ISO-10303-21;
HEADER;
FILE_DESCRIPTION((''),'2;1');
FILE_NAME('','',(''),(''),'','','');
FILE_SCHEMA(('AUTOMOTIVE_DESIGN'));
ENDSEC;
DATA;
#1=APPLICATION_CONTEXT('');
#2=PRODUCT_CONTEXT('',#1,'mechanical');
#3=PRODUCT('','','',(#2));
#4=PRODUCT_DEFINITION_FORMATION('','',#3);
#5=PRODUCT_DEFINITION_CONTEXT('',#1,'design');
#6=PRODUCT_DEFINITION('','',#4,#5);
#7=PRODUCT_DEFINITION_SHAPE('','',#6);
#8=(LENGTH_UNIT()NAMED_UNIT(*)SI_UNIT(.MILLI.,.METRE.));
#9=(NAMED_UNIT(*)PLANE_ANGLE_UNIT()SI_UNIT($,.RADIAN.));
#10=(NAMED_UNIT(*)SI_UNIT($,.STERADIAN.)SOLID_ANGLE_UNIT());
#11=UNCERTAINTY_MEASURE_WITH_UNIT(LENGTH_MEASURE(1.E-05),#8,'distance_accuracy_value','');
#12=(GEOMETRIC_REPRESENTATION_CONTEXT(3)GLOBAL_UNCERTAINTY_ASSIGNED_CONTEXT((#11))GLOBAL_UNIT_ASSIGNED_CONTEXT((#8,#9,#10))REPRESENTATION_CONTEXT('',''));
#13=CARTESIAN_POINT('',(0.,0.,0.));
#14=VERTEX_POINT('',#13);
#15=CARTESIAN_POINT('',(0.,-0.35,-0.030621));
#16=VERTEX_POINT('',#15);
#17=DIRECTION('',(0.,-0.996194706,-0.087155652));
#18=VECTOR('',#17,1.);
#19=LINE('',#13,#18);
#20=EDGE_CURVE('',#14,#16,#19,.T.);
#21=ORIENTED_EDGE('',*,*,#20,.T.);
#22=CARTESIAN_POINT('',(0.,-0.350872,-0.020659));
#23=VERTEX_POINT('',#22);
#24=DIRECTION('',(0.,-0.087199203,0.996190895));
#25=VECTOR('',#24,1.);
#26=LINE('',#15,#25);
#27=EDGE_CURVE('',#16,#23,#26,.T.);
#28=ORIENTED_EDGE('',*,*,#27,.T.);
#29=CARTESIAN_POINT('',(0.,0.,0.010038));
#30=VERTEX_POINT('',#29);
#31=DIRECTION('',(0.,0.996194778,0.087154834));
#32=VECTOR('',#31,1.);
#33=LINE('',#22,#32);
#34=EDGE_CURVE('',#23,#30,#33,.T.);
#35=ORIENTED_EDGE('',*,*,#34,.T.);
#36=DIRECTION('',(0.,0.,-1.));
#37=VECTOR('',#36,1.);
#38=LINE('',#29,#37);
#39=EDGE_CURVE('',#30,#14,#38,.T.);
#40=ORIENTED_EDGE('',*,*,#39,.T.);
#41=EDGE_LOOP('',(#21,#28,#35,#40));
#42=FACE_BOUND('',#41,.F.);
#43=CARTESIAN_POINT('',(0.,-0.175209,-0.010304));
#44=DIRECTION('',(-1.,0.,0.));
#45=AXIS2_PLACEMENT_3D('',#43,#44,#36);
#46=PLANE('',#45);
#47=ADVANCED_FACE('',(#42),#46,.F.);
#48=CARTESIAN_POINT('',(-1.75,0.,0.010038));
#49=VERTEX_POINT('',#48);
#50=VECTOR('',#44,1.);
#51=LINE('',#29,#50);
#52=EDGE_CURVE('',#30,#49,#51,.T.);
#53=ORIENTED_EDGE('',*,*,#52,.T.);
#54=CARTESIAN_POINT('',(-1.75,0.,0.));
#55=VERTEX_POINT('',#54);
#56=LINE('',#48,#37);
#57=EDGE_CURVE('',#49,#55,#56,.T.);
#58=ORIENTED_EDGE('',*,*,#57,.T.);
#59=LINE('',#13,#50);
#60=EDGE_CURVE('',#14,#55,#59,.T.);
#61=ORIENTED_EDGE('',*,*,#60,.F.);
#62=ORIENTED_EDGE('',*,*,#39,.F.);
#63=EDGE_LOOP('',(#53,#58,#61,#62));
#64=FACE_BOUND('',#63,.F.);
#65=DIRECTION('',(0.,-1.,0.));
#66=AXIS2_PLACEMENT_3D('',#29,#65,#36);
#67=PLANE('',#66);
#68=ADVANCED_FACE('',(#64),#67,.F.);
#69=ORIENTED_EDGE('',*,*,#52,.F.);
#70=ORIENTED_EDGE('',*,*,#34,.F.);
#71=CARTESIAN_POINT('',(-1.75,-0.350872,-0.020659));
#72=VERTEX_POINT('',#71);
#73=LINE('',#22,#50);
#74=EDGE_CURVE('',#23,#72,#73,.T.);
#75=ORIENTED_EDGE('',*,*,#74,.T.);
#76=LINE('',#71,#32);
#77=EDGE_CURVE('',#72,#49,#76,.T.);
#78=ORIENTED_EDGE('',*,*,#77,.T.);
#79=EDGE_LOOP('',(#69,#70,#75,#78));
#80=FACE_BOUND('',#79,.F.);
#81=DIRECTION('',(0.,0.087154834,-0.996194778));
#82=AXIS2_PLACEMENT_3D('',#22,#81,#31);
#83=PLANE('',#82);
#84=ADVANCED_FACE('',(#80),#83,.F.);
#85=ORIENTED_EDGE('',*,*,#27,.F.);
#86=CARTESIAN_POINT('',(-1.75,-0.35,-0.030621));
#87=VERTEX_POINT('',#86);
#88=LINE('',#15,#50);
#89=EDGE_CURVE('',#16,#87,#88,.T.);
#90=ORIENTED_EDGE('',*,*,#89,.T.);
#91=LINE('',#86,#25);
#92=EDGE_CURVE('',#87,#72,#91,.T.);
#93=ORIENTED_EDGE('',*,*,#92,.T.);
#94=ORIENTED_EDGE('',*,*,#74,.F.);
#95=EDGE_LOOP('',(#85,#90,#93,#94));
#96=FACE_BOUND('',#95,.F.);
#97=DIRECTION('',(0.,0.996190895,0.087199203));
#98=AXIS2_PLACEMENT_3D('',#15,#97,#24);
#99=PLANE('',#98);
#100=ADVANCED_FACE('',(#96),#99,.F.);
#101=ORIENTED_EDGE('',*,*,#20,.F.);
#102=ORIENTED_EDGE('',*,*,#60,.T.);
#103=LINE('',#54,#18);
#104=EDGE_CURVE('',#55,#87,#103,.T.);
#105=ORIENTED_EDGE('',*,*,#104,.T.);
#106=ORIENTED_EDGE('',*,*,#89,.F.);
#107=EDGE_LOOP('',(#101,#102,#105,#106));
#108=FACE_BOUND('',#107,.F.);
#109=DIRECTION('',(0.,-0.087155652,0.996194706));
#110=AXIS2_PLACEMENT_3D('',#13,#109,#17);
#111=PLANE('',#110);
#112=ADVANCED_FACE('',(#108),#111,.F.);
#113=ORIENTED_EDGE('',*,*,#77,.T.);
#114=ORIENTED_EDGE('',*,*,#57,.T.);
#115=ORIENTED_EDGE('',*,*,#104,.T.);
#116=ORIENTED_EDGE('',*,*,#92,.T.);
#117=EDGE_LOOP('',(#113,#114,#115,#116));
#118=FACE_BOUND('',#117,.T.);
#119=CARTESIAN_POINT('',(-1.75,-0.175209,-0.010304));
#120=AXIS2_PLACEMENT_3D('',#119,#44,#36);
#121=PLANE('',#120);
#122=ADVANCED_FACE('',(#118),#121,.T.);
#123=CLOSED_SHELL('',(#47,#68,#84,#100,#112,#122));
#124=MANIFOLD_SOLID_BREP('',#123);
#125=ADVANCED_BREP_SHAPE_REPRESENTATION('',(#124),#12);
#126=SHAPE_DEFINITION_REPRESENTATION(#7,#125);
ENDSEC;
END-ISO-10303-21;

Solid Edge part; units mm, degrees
sketch "Sketch1" plane through (0, 0, 0) normal (1, 0, 0) x (0, 1, 0)
  line L0 (0, 0) -> (-0.35, -0.030621)
  line L1 (-0.35, -0.030621) -> (-0.350872, -0.020659)
  line L2 (-0.350872, -0.020659) -> (0, 0.010038)
  line L3 (0, 0.010038) -> (0, 0)
  dimension "D1" = 0.35
  dimension "D2" = 0.01
extrude "Protrusion1" add sketch "Sketch1" against normal blind 1.75
